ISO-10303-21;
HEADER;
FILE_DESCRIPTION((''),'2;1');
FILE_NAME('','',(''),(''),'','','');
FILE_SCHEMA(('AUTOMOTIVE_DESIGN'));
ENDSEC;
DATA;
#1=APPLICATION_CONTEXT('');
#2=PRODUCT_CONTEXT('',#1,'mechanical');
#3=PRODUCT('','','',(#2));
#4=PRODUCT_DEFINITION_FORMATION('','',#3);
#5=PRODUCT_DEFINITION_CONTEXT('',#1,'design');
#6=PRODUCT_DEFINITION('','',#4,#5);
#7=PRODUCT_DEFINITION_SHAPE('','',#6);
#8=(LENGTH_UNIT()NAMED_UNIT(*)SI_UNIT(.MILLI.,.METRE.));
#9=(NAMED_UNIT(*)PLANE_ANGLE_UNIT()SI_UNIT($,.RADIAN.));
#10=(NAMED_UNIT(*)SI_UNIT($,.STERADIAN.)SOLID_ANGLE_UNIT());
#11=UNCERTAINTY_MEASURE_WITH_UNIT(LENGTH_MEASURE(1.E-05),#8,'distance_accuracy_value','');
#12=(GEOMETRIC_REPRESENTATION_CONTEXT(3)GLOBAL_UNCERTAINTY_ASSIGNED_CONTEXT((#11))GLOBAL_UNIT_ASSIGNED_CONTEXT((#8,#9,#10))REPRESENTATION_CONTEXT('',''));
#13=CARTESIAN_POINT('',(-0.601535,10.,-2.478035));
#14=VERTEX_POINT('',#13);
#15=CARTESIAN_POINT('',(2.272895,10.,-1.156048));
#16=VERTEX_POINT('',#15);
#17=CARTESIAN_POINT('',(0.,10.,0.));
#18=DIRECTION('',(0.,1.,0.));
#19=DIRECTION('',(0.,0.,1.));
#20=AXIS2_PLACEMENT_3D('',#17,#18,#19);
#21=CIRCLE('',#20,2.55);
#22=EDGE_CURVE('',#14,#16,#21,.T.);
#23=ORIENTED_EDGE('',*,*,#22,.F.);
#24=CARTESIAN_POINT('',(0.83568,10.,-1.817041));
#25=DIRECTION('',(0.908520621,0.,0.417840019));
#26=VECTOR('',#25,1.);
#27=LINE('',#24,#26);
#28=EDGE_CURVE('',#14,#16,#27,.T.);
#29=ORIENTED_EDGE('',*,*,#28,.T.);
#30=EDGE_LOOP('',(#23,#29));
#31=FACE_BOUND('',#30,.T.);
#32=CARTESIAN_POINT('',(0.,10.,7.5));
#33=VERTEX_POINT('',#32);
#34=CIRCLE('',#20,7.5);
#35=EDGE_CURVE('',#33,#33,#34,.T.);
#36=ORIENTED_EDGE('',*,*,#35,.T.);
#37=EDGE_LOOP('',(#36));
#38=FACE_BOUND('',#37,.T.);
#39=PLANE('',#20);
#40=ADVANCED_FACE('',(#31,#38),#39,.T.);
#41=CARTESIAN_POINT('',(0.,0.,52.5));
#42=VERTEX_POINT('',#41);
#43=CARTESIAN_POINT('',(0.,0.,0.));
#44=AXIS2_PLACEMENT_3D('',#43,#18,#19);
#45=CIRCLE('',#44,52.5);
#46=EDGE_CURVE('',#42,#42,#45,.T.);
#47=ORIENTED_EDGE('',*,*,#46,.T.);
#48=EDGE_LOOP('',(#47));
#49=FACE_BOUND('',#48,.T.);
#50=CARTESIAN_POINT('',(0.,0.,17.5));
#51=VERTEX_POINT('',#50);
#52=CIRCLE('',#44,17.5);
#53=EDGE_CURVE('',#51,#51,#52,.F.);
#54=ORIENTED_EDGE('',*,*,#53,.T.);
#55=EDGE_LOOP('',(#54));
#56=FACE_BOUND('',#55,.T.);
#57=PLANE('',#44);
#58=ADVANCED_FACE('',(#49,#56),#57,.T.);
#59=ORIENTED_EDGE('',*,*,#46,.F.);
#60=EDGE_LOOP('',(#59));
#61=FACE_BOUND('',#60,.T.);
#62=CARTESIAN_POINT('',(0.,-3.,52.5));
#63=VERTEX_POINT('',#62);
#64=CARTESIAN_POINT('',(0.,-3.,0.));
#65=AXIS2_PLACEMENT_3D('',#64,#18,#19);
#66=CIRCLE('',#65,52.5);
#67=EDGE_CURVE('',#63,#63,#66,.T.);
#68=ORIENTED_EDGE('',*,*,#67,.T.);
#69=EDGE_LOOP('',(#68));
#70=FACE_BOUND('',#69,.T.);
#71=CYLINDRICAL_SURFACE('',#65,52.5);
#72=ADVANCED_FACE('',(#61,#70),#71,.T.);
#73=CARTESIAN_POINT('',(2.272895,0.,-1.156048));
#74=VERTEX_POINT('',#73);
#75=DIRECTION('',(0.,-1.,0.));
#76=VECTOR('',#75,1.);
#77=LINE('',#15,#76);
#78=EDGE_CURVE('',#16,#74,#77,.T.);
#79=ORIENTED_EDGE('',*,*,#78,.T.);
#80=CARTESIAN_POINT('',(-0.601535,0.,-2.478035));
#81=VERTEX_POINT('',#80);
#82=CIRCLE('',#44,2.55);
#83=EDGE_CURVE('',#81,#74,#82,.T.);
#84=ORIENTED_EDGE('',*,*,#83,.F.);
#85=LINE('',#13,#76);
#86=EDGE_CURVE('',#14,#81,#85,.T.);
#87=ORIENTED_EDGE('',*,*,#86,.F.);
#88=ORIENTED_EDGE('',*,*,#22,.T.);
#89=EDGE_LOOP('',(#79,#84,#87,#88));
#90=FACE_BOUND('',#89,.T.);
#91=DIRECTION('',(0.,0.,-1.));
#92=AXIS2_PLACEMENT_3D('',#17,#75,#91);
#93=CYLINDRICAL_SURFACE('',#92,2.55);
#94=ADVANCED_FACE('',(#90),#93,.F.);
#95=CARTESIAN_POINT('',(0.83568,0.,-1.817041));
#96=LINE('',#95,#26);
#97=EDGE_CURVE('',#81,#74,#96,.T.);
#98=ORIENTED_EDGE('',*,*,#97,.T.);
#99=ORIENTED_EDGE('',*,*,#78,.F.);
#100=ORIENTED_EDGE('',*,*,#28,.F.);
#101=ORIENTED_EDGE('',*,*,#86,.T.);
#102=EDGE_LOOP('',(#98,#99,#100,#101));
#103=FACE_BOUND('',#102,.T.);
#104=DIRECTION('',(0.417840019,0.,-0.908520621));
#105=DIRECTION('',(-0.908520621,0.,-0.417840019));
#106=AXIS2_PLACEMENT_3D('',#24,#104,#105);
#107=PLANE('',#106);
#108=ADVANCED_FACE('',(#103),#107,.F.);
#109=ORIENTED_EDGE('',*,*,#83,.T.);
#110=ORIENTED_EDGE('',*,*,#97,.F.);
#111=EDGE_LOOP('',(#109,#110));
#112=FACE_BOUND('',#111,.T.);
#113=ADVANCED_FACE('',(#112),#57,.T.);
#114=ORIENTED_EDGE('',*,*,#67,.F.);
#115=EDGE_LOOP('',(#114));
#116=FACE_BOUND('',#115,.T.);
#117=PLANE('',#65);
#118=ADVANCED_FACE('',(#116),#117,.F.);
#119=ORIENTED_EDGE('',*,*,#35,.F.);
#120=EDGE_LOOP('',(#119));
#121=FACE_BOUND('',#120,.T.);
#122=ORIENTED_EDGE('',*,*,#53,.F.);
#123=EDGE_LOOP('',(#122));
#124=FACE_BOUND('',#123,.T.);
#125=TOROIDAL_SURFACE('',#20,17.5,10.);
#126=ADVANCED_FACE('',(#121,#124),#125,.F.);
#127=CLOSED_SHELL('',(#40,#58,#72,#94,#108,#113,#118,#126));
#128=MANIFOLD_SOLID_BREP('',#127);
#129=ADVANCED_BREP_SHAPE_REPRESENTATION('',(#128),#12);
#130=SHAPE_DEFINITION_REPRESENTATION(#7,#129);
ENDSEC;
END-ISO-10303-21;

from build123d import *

# Parameters (mm, degrees)
SKIZZE1_R                       = 52.5
SKIZZE1_R_2                     = 7.5
SKIZZE1_R_3                     = 2.55
AUFSATZ_LINEAR_AUSTRAGEN1_DEPTH = 3
SKIZZE1_3_R                     = 7.5
AUFSATZ_LINEAR_AUSTRAGEN2_DEPTH = 10
VERRUNDUNG1_R                   = 10


with BuildPart() as part:
    # Skizze1 → Aufsatz-Linear austragen1 (new body)
    # profile 1 of 6: a face of its own
    with BuildSketch(Plane(origin=(0, 0, 0), x_dir=(1, 0, 0), z_dir=(0, 1, 0))):
        with Locations(Location((0, 0, 0), (0, 0, 270))):
            Circle(SKIZZE1_R)
        Circle(SKIZZE1_R_2, mode=Mode.SUBTRACT)
    # profile 2 of 6: a face of its own
    with BuildSketch(Plane(origin=(0, 0, 0), x_dir=(1, 0, 0), z_dir=(0, 1, 0))):
        Circle(SKIZZE1_R_2)
        Circle(SKIZZE1_R_3, mode=Mode.SUBTRACT)
    # profile 3 of 6: a face of its own
    with BuildSketch(Plane(origin=(0, 0, 0), x_dir=(1, 0, 0), z_dir=(0, 1, 0))):
        with BuildLine():
            Line((2.272895339, 1.156047913), (-0.601535262, 2.47803457))
            ThreePointArc((-0.601535262, 2.47803457), (-1.576163869, -2.004546697), (2.55, 0))
            ThreePointArc((2.55, 0), (2.47975635, 0.594397546), (2.272895339, 1.156047913))
        make_face()
    # profile 4 of 6: a face of its own
    with BuildSketch(Plane(origin=(0, 0, 0), x_dir=(1, 0, 0), z_dir=(0, 1, 0))):
        with BuildLine():
            ThreePointArc((2.272895339, 1.156047913), (1.065492049, 2.316727583), (-0.601535262, 2.47803457))
            Line((-0.601535262, 2.47803457), (2.272895339, 1.156047913))
        make_face()
    # profile 5 of 6: a face of its own
    with BuildSketch(Plane(origin=(0, 0, 0), x_dir=(1, 0, 0), z_dir=(0, 1, 0))):
        with BuildLine():
            Line((2.272895339, 1.156047913), (-0.601535262, 2.47803457))
            ThreePointArc((-0.601535262, 2.47803457), (-1.576163869, -2.004546697), (2.55, 0))
            ThreePointArc((2.55, 0), (2.47975635, 0.594397546), (2.272895339, 1.156047913))
        make_face()
    # profile 6 of 6: a face of its own
    with BuildSketch(Plane(origin=(0, 0, 0), x_dir=(1, 0, 0), z_dir=(0, 1, 0))):
        with BuildLine():
            ThreePointArc((2.272895339, 1.156047913), (1.065492049, 2.316727583), (-0.601535262, 2.47803457))
            Line((-0.601535262, 2.47803457), (2.272895339, 1.156047913))
        make_face()
    extrude(amount=-AUFSATZ_LINEAR_AUSTRAGEN1_DEPTH)

    # Skizze1<3> → Aufsatz-Linear austragen2 (add)
    with BuildSketch(Plane(origin=(0, 0, 0), x_dir=(1, 0, 0), z_dir=(0, 1, 0))):
        with Locations(Location((0, 0, 0), (0, 0, 270))):
            Circle(SKIZZE1_3_R)
        with BuildLine():
            Line((-0.601535262, 2.47803457), (2.272895339, 1.156047913))
            ThreePointArc((2.272895339, 1.156047913), (-1.065492049, -2.316727583), (-0.601535262, 2.47803457))
        make_face(mode=Mode.SUBTRACT)
    extrude(amount=AUFSATZ_LINEAR_AUSTRAGEN2_DEPTH)

    # Verrundung1
    verrundung1_edges = [part.edges().sort_by_distance(p)[0] for p in [
        (0, 0, -7.5),
    ]]
    fillet(verrundung1_edges, radius=VERRUNDUNG1_R - 0.0001)  # a hair under: the kernel refuses the full size


solid = part.part
